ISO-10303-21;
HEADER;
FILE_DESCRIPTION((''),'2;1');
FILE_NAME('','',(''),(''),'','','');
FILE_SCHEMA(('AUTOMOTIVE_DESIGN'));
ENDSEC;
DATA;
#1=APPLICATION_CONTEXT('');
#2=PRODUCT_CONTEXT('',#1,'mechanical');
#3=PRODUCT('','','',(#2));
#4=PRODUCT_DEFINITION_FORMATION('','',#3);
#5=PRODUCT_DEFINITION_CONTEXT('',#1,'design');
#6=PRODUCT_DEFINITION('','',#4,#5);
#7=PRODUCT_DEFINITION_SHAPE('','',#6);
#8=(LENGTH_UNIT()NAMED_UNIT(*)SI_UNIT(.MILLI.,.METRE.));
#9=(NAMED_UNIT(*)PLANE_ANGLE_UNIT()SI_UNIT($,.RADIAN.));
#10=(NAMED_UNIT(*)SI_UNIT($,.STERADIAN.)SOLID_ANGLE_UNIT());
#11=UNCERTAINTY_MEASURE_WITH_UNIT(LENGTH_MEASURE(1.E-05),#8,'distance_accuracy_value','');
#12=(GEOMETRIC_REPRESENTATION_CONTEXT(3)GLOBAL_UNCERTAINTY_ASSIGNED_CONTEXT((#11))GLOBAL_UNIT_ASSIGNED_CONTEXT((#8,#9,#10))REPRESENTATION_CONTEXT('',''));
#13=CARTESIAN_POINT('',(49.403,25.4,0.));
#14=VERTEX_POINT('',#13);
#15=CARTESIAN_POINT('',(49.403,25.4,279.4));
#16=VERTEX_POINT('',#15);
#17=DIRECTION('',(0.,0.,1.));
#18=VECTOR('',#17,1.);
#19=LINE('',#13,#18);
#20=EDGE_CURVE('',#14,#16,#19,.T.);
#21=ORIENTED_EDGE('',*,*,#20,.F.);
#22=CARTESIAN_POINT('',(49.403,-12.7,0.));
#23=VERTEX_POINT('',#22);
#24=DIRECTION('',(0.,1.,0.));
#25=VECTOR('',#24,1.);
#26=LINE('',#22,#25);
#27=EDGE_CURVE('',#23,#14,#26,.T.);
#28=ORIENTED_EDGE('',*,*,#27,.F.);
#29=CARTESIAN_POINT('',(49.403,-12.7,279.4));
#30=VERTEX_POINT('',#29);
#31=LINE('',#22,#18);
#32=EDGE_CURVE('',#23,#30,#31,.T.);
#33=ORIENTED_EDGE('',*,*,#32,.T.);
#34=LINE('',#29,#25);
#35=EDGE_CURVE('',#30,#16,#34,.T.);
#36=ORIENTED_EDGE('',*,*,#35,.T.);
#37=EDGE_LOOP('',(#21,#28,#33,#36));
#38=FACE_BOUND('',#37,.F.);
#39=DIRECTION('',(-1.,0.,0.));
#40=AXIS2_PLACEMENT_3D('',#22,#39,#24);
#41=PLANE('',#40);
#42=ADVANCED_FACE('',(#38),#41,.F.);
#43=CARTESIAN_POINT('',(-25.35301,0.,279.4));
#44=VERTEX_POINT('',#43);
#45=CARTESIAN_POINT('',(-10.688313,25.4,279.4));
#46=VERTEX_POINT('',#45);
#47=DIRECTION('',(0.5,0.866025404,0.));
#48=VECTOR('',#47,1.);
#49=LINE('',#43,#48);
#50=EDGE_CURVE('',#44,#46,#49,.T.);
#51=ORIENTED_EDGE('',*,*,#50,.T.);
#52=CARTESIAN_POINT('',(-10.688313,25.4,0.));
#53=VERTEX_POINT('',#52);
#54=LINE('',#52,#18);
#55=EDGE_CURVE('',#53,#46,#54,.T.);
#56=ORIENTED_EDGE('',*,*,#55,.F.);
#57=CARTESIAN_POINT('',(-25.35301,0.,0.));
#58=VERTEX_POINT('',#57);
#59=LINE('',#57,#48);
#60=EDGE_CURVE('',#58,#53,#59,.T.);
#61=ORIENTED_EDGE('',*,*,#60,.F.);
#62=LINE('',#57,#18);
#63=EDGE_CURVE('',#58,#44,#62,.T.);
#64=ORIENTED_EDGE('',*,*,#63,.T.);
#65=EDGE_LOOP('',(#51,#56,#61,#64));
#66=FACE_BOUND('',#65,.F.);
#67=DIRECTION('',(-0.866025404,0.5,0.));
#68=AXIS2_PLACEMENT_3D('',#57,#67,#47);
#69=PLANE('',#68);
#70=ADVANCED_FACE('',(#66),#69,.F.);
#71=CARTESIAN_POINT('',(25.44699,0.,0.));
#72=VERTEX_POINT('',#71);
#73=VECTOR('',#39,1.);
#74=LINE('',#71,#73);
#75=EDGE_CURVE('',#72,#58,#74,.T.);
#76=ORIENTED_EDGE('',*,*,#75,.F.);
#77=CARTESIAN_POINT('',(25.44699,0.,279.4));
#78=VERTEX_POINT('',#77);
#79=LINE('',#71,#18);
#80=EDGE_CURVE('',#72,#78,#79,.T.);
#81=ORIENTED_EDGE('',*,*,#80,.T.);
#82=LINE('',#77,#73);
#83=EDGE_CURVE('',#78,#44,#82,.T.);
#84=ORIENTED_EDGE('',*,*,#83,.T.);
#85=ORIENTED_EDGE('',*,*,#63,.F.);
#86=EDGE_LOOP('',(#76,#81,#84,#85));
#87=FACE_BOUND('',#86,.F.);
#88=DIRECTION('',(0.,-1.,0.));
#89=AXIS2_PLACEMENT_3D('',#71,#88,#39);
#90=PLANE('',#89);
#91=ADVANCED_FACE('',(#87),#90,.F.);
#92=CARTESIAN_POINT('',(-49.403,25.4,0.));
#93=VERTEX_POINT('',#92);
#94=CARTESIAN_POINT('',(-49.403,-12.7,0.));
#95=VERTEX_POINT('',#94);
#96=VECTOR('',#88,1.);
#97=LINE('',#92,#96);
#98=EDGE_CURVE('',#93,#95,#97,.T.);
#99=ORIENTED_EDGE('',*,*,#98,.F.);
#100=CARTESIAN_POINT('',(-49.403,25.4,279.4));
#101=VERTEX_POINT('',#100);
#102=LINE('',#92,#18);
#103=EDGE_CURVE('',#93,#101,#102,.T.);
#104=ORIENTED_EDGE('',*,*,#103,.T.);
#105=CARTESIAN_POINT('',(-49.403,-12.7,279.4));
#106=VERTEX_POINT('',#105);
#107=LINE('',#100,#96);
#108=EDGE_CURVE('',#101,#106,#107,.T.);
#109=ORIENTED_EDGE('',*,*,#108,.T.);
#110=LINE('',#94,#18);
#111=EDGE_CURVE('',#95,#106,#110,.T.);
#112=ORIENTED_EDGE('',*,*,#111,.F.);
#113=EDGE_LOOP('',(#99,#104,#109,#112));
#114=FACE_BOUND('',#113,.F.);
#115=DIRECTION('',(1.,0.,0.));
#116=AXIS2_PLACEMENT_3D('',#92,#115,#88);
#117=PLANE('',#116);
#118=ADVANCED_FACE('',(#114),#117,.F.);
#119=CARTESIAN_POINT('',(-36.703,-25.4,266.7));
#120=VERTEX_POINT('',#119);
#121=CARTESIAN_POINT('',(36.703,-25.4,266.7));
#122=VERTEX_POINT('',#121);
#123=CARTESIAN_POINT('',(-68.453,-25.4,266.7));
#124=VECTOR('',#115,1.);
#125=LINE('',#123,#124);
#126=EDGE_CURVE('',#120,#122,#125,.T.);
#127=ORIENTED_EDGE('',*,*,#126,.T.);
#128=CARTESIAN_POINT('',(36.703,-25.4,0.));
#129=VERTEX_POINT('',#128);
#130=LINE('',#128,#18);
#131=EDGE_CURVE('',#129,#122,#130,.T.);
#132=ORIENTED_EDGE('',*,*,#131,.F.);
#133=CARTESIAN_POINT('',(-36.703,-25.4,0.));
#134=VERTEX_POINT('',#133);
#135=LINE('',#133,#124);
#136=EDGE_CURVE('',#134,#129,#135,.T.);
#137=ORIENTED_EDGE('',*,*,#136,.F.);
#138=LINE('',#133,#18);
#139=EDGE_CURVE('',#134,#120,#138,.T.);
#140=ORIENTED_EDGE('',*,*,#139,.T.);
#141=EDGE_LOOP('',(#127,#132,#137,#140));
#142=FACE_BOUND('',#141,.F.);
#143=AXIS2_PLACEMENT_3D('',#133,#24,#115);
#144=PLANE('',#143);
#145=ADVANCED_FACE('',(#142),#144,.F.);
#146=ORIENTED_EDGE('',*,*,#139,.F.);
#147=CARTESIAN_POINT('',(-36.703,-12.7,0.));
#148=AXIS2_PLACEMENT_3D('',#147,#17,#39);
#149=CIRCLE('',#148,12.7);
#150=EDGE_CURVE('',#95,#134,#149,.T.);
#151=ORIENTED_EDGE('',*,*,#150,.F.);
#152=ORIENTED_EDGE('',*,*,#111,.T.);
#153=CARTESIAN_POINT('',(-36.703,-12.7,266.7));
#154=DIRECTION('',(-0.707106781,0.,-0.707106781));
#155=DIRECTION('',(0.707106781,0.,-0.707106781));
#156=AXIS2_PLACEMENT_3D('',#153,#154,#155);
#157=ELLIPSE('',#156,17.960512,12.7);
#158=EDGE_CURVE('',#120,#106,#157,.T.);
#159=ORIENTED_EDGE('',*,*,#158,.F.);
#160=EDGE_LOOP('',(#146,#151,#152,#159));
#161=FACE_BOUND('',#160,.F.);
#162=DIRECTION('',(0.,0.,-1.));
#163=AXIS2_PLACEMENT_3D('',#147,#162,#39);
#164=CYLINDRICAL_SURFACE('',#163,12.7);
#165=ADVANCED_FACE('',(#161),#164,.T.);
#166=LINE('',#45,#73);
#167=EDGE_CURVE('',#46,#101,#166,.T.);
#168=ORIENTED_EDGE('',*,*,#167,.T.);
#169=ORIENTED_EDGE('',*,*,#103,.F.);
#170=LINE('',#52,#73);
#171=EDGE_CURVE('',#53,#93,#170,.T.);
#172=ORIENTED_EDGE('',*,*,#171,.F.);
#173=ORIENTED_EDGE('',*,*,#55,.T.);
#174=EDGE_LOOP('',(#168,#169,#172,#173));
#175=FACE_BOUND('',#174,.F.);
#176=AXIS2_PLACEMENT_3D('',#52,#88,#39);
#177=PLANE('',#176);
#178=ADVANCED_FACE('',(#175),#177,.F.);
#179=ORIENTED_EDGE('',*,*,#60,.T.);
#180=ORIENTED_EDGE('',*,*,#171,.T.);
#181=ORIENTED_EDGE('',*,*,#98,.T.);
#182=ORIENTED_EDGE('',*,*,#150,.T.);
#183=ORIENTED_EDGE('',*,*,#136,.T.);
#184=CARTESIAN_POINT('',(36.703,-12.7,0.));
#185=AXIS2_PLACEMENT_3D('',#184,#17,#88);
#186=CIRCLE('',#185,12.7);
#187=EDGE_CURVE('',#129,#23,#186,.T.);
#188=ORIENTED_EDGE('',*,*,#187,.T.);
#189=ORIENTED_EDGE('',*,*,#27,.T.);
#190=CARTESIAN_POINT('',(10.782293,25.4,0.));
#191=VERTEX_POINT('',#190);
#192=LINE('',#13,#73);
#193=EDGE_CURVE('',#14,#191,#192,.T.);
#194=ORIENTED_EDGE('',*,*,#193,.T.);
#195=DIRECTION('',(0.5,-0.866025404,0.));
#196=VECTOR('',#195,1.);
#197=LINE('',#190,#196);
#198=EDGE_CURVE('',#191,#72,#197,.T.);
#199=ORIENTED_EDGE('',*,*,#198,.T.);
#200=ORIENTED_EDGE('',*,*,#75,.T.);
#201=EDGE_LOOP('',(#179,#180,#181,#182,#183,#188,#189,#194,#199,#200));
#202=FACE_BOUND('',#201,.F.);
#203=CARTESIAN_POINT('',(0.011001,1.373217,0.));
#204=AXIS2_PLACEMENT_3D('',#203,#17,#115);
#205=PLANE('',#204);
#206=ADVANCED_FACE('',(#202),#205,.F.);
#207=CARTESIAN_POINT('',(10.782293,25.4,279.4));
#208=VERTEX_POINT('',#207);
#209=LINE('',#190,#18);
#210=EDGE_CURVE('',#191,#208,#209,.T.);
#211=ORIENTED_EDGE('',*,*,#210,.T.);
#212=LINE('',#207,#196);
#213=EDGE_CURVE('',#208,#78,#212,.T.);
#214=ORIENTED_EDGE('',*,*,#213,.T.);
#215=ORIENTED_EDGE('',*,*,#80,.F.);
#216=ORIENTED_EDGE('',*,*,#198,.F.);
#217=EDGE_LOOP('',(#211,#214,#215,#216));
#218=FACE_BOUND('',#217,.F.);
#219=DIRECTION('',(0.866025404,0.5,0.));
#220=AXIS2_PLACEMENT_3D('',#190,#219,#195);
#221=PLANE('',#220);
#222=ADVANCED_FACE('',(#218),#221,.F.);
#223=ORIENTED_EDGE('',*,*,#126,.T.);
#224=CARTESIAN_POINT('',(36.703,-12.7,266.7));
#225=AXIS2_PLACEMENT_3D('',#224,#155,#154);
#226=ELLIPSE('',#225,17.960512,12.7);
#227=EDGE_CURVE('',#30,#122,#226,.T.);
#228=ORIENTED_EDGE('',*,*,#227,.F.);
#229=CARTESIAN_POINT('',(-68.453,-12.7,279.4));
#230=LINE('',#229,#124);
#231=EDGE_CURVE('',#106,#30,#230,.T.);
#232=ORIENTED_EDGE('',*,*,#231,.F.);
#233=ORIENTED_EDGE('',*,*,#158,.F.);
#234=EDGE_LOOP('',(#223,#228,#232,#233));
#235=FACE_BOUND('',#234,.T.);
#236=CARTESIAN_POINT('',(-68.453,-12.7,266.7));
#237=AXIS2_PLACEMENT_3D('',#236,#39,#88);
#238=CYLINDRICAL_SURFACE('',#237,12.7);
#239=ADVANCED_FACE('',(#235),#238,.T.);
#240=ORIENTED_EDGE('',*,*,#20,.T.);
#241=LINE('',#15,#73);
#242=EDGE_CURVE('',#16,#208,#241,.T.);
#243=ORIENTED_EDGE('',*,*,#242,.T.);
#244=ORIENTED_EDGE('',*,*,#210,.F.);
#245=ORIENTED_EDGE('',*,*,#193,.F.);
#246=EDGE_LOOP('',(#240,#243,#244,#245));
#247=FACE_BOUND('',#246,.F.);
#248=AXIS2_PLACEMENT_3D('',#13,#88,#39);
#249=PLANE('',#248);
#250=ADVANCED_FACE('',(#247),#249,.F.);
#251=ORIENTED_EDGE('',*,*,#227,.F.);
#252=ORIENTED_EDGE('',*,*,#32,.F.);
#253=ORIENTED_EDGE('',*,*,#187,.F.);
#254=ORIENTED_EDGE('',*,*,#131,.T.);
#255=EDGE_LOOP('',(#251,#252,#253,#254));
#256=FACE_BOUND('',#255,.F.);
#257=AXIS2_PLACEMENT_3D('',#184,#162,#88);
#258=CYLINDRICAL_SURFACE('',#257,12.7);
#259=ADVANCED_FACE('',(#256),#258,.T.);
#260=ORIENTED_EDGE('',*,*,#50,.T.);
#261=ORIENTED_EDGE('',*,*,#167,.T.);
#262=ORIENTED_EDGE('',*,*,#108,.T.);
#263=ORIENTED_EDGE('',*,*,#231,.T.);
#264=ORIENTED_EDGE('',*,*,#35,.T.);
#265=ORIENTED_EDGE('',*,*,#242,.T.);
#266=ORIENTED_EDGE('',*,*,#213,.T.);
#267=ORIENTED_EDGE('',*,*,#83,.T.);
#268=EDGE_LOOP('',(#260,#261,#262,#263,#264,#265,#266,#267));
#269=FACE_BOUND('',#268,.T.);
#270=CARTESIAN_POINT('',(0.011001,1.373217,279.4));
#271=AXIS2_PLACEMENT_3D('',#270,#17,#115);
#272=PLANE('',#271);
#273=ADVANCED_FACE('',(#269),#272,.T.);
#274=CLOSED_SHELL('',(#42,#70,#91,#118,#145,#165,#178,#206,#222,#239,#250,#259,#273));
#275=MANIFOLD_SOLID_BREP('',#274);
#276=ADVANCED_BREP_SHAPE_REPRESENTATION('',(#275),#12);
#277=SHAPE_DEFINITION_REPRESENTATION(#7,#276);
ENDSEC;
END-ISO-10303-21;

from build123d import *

# Parameters (mm, degrees)
F1_DEPTH    = 279.4
F2_T1_DEPTH = 136.906


# Not quite as in the source:
# - a fillet or chamfer that OpenCascade refuses, or shapes differently, is made with other operations: its cross-section is extruded or revolved along the edge and cut away or added


with BuildPart() as f1:
    # F0 (on Top) → F1 (new body)
    with BuildSketch(Plane.XY):
        with BuildLine():
            Line((49.403, -12.7), (49.403, 25.4))
            Line((49.403, 25.4), (10.7822931626, 25.4))
            Line((10.7822931626, 25.4), (25.44699, 0))
            Line((25.44699, 0), (-25.35301, 0))
            Line((-25.35301, 0), (-10.6883131626, 25.4))
            Line((-10.6883131626, 25.4), (-49.403, 25.4))
            Line((-49.403, 25.4), (-49.403, -12.7))
            ThreePointArc((-49.403, -12.7), (-45.6832561211, -21.6802561211), (-36.703, -25.4))
            Line((-36.703, -25.4), (36.703, -25.4))
            ThreePointArc((36.703, -25.4), (45.6832561211, -21.6802561211), (49.403, -12.7))
        make_face()
    extrude(amount=F1_DEPTH)

    # F2: fillet of radius 12.7 on 1 edges, made by hand

    # F2_s2 → F2_t1 (cut)
    with BuildSketch(Plane.YZ.offset(-68.453)):
        with BuildLine():
            ThreePointArc((-25.4, 266.7), (-21.6802561211, 275.6802561211), (-12.7, 279.4))
            Line((-12.7, 279.4), (-25.4, 279.4))
            Line((-25.4, 279.4), (-25.4, 266.7))
        make_face()
    extrude(amount=F2_T1_DEPTH, mode=Mode.SUBTRACT)


solid = f1.part
